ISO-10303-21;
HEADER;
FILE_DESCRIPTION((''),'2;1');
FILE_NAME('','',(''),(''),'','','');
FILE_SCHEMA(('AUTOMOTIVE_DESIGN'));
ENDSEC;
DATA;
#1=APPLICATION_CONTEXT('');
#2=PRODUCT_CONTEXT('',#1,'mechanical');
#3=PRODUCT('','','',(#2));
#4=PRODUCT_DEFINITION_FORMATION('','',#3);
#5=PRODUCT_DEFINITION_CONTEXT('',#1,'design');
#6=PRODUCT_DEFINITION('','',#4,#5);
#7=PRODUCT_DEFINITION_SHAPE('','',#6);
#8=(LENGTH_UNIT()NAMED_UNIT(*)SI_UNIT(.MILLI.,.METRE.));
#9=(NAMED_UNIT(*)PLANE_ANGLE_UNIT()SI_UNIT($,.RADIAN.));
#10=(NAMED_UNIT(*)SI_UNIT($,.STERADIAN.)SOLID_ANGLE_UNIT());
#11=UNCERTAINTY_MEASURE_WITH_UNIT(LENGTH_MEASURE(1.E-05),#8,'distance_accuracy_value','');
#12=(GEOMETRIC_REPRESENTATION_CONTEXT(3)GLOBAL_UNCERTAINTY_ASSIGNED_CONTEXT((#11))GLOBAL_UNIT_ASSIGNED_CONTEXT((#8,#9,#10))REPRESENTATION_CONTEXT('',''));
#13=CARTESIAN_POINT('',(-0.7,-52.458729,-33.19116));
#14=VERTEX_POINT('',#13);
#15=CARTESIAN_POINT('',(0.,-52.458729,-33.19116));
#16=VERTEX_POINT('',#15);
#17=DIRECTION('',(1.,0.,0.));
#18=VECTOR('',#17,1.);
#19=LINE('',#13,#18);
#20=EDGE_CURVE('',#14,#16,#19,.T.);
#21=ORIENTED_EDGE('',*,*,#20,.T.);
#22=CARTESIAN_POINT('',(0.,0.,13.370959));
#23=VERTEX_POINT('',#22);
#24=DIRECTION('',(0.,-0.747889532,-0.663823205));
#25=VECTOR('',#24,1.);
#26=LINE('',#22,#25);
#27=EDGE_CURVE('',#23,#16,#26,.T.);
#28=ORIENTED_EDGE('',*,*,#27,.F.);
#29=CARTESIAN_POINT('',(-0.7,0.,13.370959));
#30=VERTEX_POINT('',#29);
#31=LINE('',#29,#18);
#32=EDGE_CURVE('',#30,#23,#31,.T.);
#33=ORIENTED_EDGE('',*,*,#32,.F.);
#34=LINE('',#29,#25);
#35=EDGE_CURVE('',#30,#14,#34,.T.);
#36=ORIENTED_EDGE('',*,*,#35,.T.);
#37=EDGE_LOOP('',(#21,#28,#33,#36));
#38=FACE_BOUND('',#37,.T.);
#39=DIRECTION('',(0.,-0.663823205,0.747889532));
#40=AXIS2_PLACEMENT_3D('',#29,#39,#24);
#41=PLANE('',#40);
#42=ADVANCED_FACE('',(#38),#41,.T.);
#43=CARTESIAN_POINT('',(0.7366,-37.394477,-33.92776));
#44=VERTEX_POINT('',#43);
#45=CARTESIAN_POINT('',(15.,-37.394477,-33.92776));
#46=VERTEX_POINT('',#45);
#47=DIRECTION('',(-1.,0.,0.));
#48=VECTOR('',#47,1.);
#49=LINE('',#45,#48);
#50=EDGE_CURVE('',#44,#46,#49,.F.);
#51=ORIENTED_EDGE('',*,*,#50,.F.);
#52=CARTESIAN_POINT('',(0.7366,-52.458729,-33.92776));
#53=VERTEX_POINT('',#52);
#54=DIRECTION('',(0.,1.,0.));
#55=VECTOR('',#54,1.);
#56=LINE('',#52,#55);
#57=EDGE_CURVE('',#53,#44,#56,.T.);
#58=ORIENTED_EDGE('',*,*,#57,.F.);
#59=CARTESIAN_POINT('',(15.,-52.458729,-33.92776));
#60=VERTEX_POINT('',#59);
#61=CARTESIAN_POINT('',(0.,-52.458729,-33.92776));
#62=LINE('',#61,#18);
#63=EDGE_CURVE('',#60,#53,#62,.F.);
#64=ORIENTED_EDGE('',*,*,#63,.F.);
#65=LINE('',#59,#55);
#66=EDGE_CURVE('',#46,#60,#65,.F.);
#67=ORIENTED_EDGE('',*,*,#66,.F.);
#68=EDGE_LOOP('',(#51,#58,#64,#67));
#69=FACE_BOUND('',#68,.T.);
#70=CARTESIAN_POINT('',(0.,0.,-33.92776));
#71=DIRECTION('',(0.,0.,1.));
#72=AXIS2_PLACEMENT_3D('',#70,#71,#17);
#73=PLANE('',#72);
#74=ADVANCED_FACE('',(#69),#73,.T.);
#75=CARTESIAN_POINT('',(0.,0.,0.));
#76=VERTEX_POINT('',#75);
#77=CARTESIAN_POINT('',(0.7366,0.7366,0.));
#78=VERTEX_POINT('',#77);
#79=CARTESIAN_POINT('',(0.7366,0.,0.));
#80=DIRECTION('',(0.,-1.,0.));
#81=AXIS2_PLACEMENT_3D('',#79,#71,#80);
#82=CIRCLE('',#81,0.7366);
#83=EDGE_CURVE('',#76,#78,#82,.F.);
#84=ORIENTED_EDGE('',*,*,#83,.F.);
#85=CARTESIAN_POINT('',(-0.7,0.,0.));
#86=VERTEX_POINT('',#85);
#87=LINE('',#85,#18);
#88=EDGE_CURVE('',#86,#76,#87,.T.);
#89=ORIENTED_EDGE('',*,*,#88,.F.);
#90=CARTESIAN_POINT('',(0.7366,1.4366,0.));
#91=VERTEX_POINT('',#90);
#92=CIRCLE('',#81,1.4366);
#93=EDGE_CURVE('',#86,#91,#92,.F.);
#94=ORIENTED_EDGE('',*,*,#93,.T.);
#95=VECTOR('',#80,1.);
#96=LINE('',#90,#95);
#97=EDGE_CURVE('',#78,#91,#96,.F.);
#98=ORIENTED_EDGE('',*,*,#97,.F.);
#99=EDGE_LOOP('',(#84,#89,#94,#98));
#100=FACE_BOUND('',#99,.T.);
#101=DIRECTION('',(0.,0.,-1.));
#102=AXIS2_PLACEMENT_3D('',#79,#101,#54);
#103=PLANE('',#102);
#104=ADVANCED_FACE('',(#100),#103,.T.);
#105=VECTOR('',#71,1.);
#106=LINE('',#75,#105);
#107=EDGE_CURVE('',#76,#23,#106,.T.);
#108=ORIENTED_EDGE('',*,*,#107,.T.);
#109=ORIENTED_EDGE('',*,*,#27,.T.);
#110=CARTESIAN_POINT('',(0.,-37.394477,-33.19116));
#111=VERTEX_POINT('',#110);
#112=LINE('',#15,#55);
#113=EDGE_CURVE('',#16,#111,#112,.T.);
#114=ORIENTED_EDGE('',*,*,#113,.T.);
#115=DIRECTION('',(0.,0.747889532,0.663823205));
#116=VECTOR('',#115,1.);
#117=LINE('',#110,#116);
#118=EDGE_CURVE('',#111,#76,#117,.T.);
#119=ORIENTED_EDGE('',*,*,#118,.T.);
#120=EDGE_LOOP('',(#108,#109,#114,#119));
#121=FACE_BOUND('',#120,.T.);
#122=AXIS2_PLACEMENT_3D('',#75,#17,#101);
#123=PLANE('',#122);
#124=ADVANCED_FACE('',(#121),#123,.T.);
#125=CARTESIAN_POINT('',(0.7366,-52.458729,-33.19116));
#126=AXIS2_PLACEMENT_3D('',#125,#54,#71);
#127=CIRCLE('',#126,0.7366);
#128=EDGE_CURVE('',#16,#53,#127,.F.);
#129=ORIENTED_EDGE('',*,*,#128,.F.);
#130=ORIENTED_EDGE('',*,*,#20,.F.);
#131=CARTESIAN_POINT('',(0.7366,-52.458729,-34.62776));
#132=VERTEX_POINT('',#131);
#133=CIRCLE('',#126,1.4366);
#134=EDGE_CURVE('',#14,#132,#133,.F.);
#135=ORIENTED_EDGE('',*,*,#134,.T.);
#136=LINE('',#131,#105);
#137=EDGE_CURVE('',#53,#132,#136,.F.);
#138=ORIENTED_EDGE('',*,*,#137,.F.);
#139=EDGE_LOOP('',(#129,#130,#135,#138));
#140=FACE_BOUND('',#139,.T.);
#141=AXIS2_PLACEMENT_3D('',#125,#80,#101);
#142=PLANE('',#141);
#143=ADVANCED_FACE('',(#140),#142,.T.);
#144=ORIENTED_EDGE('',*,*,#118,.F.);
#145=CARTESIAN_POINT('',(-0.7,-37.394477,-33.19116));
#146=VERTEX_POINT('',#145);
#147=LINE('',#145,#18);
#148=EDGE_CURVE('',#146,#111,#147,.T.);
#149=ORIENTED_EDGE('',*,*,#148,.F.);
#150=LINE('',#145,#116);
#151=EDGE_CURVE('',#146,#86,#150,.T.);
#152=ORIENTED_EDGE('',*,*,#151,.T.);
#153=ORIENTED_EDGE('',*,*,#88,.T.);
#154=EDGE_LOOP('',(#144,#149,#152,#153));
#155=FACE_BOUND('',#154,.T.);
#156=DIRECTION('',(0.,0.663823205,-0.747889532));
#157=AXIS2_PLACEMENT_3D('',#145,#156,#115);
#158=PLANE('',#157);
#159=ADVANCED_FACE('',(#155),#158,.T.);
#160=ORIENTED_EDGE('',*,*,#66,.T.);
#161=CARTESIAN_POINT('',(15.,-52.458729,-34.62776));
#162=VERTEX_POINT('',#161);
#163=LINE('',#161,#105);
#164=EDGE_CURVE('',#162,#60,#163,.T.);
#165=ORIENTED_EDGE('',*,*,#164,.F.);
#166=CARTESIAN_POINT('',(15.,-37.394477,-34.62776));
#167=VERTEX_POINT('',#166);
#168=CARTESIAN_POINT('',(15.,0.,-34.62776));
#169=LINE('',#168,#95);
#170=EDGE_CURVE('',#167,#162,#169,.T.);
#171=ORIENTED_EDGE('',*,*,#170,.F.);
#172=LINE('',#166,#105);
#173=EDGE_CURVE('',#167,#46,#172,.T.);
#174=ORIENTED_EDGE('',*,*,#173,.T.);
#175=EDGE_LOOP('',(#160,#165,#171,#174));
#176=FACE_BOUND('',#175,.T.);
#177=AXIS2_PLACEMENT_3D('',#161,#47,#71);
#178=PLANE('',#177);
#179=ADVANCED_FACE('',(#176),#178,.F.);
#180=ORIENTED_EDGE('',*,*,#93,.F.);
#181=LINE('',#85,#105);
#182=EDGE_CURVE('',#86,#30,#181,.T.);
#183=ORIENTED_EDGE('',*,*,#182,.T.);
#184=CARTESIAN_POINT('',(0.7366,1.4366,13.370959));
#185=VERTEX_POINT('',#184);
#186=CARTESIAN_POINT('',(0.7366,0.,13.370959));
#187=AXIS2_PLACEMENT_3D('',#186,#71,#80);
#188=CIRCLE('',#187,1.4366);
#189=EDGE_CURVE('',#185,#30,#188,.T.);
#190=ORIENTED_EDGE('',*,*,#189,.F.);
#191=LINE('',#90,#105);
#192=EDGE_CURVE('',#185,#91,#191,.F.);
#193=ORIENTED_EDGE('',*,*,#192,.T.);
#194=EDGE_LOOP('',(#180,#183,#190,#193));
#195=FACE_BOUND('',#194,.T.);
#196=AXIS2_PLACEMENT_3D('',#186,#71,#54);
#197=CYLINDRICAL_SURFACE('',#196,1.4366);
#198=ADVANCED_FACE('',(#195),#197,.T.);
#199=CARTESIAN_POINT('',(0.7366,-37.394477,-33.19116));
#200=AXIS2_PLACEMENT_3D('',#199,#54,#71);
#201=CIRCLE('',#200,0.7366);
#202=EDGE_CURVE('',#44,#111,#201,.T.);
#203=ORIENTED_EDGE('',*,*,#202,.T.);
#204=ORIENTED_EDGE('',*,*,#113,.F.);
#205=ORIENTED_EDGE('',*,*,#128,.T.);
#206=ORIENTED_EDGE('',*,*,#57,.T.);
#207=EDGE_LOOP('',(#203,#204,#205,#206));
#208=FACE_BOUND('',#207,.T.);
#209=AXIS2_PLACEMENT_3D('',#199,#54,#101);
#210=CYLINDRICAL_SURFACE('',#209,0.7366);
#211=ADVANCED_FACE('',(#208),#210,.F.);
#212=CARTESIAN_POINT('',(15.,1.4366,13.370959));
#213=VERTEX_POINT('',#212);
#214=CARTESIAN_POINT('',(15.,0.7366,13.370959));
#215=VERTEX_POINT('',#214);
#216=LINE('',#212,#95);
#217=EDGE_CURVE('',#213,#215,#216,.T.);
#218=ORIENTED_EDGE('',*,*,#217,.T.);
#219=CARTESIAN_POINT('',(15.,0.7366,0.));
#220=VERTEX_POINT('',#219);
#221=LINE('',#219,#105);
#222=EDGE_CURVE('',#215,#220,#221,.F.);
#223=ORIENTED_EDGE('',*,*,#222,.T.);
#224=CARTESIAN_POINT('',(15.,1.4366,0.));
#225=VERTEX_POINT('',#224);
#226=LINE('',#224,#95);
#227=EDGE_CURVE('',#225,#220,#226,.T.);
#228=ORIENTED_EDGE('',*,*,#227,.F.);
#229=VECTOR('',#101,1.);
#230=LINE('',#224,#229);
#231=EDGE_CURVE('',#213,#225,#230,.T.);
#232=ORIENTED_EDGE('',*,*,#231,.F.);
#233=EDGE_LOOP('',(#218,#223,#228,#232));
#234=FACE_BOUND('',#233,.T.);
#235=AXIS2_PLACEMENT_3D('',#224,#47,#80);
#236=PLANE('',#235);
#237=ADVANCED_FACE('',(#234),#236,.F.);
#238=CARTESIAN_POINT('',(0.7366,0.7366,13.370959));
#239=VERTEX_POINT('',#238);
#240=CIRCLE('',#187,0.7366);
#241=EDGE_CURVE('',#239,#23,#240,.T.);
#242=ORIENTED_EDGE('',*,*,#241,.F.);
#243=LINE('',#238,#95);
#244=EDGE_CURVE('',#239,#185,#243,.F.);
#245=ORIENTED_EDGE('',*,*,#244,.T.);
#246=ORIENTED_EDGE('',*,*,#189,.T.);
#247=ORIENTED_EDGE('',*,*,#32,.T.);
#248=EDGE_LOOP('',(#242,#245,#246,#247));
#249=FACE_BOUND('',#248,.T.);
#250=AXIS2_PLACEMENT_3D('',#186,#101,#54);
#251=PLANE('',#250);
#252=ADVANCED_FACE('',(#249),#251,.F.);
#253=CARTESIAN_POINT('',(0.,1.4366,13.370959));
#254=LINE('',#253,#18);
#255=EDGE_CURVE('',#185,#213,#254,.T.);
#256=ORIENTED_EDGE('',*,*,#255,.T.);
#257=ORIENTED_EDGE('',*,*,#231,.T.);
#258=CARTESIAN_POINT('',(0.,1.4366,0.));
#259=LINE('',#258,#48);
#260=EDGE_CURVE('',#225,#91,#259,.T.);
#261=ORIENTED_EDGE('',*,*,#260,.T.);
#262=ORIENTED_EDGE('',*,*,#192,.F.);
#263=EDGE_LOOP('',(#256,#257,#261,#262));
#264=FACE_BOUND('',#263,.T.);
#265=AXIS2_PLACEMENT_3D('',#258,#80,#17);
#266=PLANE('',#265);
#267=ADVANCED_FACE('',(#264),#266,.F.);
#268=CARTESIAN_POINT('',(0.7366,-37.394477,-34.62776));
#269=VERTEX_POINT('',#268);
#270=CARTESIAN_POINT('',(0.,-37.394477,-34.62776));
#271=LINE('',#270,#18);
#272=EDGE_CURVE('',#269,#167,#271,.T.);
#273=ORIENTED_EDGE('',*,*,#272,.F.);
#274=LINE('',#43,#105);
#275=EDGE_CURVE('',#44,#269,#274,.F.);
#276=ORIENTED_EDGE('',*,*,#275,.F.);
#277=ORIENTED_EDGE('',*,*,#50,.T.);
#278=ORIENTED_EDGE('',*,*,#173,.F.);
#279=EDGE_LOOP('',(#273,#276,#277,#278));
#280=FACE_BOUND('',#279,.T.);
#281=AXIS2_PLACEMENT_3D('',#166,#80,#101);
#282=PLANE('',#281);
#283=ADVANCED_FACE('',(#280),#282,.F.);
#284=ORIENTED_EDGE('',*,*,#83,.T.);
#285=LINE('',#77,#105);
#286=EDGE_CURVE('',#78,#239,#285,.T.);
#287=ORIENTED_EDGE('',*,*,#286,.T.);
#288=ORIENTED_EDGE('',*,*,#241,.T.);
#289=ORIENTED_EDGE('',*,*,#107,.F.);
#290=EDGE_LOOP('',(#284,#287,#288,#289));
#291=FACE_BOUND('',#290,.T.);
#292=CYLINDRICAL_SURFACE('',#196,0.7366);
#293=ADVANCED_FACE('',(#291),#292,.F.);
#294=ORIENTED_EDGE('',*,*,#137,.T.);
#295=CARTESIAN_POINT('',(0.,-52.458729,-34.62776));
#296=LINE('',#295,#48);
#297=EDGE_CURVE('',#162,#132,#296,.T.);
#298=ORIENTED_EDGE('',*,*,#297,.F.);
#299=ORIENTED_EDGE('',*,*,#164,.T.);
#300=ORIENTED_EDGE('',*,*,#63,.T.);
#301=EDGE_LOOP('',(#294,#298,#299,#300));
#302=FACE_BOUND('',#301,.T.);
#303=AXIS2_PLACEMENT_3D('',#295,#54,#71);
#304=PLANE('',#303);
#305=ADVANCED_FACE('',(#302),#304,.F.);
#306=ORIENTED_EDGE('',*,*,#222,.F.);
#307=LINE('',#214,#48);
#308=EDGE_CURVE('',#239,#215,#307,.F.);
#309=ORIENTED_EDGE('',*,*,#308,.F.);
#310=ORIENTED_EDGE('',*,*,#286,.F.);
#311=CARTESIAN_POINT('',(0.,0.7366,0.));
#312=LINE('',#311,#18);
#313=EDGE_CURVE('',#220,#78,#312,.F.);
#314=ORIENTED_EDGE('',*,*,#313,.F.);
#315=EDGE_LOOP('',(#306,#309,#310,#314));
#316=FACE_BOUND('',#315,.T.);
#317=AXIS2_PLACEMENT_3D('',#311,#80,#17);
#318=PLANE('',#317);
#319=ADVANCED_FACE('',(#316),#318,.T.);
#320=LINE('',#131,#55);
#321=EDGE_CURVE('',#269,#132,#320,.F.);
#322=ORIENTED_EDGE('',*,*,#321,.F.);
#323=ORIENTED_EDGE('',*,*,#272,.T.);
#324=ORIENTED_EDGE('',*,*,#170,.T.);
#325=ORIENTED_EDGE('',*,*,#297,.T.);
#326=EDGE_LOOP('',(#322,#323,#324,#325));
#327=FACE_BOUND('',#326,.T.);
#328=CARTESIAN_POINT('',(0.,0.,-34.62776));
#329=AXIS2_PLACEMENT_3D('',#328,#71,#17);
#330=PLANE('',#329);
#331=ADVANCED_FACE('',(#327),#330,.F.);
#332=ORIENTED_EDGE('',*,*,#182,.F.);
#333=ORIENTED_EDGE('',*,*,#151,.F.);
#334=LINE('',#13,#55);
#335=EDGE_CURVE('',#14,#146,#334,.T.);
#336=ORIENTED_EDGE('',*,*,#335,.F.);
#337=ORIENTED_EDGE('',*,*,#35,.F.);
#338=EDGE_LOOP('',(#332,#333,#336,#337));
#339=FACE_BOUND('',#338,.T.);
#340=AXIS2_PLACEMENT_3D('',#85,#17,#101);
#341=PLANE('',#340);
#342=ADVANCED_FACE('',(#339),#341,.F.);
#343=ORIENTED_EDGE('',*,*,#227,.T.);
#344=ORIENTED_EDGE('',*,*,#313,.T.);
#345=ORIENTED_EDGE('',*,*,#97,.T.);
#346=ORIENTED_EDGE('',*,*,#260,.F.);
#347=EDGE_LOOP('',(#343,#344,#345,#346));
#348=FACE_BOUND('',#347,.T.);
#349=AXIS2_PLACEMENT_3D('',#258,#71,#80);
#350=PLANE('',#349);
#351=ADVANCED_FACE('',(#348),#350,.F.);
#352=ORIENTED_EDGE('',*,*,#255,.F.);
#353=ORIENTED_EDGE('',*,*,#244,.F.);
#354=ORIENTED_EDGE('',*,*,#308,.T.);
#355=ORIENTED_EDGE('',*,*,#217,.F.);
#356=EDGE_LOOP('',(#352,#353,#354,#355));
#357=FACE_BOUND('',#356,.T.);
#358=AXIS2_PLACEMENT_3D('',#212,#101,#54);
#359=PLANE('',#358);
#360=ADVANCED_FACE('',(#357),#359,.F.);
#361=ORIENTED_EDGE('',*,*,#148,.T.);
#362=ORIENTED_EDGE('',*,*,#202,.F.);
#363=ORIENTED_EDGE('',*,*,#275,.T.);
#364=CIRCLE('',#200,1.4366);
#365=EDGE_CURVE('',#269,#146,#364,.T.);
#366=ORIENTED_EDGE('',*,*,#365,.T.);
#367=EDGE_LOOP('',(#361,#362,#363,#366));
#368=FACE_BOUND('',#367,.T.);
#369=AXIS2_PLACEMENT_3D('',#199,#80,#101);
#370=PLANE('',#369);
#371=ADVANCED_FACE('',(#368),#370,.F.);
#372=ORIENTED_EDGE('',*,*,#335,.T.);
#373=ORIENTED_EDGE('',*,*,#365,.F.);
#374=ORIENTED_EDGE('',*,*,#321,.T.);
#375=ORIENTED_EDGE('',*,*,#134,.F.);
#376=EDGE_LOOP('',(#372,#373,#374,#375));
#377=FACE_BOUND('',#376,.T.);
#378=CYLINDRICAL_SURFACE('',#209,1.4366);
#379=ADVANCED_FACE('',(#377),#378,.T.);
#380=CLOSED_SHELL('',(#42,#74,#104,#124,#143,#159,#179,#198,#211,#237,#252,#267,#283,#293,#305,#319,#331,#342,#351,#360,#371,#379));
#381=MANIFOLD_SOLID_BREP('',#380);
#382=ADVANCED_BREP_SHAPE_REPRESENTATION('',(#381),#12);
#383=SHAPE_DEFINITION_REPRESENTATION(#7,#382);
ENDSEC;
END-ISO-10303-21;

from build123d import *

# Parameters (mm, degrees)
BASE_FLANGE1_DEPTH      = 0.7
EDGE_FLANGE1_DEPTH      = 13.370958639
EDGE_FLANGE1_BEND_DEPTH = 15.064251929


# Sheet-metal steps are written as plain solids
with BuildPart() as part:
    # Sketch1 → Base-Flange1 (new body)
    with BuildSketch(Plane(origin=(0, 0, 0), x_dir=(0, 0, -1), z_dir=(1, 0, 0))):
        Polygon((0, 0), (-13.370958639, 0), (33.191160263, -52.458728532), (33.191160263, -37.394476603), align=None)
    extrude(amount=-BASE_FLANGE1_DEPTH)

    # Edge-Flange1 section (across the edge) → Edge-Flange1 (add)
    with BuildSketch(Plane(origin=(0, 0.7366, 0), x_dir=(0, -1, 0), z_dir=(0, 0, 1))):
        with BuildLine():
            Line((-0.7, 0.7366), (-0.7, 15))
            Line((-0.7, 15), (0, 15))
            Line((0, 15), (0, 0.7366))
            ThreePointArc((0, 0.7366), (0.215745145, 0.215745145), (0.7366, 0))
            Line((0.7366, 0), (0.7366, -0.7))
            ThreePointArc((0.7366, -0.7), (-0.279229602, -0.279229602), (-0.7, 0.7366))
        make_face()
    extrude(amount=EDGE_FLANGE1_DEPTH)

    # Edge-Flange1 section 2 (across the edge) → Edge-Flange1 bend (add)
    with BuildSketch(Plane(origin=(0, -52.458728532, -33.927760263), x_dir=(0, 0, 1), z_dir=(0, 1, 0))):
        with BuildLine():
            Line((-0.7, 0.7366), (-0.7, 15))
            Line((-0.7, 15), (0, 15))
            Line((0, 15), (0, 0.7366))
            ThreePointArc((0, 0.7366), (0.215745145, 0.215745145), (0.7366, 0))
            Line((0.7366, 0), (0.7366, -0.7))
            ThreePointArc((0.7366, -0.7), (-0.279229602, -0.279229602), (-0.7, 0.7366))
        make_face()
    extrude(amount=EDGE_FLANGE1_BEND_DEPTH)


solid = part.part
